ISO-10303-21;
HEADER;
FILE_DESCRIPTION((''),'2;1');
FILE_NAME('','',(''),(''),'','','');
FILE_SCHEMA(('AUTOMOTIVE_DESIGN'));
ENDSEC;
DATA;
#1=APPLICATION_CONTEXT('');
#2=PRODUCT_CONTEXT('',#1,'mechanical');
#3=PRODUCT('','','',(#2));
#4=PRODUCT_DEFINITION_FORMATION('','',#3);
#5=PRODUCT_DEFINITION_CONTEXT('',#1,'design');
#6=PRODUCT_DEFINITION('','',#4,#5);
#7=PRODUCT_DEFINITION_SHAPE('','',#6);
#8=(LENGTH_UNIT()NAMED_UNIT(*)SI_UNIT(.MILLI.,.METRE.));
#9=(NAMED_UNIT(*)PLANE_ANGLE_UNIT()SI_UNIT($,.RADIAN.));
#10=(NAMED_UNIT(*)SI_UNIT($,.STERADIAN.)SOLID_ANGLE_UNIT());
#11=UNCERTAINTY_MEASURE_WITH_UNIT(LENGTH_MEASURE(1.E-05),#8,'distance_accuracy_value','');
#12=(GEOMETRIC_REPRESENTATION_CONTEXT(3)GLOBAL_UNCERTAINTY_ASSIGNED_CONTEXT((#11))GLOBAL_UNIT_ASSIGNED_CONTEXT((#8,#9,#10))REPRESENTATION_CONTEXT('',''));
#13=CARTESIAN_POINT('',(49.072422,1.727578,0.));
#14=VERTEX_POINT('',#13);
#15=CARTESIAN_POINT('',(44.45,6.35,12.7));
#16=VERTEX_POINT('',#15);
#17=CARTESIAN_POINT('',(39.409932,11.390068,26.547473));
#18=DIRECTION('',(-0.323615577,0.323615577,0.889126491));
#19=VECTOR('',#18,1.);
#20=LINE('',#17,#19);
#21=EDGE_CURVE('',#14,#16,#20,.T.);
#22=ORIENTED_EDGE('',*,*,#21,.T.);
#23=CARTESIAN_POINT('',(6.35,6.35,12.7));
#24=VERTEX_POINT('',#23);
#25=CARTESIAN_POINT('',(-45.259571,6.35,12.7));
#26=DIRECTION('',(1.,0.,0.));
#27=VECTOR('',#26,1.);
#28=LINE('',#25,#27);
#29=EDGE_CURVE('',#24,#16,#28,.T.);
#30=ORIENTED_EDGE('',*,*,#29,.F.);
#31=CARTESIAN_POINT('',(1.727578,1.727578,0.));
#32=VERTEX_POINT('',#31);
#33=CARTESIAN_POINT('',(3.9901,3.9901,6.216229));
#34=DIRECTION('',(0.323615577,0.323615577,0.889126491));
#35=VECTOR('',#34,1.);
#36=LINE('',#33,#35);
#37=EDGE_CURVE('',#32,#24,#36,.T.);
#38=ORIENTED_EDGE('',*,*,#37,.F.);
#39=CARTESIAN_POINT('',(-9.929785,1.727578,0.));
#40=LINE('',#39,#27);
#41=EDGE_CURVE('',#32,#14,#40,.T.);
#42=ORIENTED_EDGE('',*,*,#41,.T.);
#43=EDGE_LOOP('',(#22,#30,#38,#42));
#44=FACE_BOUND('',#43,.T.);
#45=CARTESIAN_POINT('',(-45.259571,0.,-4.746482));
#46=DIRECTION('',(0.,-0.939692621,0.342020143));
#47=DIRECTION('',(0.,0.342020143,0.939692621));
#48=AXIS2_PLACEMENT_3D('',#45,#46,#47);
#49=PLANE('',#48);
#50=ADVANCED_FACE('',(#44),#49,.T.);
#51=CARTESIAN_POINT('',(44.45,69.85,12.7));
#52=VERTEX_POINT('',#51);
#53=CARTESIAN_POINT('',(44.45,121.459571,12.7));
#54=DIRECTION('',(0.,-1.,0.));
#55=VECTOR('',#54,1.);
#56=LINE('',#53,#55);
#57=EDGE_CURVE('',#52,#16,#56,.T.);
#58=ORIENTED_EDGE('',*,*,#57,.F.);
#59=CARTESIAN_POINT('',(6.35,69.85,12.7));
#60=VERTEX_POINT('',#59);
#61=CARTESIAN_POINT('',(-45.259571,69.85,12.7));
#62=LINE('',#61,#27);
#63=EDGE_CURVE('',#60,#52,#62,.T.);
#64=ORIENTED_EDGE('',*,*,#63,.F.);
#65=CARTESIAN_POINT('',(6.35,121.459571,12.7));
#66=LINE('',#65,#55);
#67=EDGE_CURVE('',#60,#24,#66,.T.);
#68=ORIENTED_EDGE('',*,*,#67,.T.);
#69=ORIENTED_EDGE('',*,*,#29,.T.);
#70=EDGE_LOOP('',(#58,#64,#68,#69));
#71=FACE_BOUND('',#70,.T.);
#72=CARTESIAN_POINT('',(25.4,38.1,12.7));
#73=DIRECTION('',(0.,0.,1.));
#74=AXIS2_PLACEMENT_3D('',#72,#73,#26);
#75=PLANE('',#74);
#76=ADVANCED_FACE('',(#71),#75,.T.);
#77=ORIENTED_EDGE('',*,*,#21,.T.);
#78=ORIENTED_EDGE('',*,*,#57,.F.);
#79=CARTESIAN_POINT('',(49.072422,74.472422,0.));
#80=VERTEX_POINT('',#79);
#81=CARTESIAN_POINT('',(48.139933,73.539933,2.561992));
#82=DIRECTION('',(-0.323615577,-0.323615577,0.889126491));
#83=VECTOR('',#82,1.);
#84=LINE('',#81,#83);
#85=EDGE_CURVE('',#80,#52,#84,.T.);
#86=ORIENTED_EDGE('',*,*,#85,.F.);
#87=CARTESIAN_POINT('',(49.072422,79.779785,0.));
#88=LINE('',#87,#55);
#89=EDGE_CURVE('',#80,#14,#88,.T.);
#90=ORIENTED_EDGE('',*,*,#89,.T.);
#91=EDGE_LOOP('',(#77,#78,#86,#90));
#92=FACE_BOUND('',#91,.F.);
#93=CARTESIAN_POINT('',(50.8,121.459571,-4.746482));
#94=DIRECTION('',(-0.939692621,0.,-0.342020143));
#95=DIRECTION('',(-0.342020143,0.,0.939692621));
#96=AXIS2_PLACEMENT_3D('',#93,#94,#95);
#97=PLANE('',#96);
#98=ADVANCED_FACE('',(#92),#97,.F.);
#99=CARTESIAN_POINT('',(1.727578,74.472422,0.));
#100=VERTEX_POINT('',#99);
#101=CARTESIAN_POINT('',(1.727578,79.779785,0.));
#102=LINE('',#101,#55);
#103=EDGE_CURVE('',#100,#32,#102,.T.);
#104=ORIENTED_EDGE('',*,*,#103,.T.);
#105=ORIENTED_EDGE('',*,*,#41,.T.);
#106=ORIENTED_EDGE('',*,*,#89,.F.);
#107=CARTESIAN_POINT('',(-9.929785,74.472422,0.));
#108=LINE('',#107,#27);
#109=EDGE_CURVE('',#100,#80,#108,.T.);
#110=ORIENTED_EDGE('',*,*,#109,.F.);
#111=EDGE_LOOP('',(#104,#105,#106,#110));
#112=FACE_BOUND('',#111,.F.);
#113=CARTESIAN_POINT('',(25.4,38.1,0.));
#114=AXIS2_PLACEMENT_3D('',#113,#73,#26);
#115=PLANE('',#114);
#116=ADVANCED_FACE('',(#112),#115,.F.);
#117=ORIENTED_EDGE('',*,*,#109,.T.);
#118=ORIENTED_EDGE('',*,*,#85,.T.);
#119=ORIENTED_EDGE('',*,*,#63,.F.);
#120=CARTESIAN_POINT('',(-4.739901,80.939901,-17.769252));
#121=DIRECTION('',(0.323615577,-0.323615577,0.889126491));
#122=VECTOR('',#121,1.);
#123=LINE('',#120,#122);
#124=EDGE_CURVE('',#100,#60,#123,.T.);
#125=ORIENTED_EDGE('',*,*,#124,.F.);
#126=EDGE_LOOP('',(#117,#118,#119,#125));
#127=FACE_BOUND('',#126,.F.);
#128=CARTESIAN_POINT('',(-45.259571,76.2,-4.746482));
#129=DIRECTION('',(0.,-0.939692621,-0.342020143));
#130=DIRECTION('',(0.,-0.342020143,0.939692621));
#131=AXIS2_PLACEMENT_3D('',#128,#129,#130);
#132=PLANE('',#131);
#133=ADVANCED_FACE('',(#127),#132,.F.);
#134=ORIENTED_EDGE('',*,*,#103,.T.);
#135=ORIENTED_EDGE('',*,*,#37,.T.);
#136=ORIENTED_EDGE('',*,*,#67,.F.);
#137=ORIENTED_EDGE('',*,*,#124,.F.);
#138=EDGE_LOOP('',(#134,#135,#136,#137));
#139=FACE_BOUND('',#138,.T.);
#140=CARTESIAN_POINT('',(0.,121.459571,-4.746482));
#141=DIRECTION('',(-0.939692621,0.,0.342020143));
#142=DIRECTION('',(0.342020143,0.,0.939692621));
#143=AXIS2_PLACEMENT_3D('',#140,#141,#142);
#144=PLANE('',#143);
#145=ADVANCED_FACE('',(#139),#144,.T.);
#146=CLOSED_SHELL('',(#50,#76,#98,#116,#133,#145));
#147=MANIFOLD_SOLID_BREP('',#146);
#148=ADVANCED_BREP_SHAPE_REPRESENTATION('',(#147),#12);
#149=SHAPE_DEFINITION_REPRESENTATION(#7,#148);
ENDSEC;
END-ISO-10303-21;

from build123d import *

# Parameters (mm, degrees)
F0_W        = 50.8
F0_H        = 76.2
F1_DEPTH    = 12.7
F2_T1_DEPTH = 166.7191414068
F2_T3_DEPTH = 141.3191414068


# Not quite as in the source:
# - a fillet or chamfer that OpenCascade refuses, or shapes differently, is made with other operations: its cross-section is extruded or revolved along the edge and cut away or added


with BuildPart() as f1:
    # F0 (on Top) → F1 (new body)
    with BuildSketch(Plane.XY):
        with Locations((25.4, 38.1)):
            Rectangle(F0_W, F0_H)
    extrude(amount=F1_DEPTH)

    # F2: chamfer of 6.35 x 17.4464816135 on 4 edges, made by hand

    # F2_s2 → F2_t1 (cut)
    with BuildSketch(Plane.XZ.offset(-121.4595707034)):
        Polygon((0, -4.7464816135), (6.35, 12.7), (0, 12.7), align=None)
        Polygon((50.8, -4.7464816135), (44.45, 12.7), (50.8, 12.7), align=None)
    extrude(amount=F2_T1_DEPTH, mode=Mode.SUBTRACT)

    # F2_s4 → F2_t3 (cut)
    with BuildSketch(Plane.YZ.offset(-45.2595707034)):
        Polygon((0, -4.7464816135), (6.35, 12.7), (0, 12.7), align=None)
        Polygon((76.2, -4.7464816135), (69.85, 12.7), (76.2, 12.7), align=None)
    extrude(amount=F2_T3_DEPTH, mode=Mode.SUBTRACT)


solid = f1.part
